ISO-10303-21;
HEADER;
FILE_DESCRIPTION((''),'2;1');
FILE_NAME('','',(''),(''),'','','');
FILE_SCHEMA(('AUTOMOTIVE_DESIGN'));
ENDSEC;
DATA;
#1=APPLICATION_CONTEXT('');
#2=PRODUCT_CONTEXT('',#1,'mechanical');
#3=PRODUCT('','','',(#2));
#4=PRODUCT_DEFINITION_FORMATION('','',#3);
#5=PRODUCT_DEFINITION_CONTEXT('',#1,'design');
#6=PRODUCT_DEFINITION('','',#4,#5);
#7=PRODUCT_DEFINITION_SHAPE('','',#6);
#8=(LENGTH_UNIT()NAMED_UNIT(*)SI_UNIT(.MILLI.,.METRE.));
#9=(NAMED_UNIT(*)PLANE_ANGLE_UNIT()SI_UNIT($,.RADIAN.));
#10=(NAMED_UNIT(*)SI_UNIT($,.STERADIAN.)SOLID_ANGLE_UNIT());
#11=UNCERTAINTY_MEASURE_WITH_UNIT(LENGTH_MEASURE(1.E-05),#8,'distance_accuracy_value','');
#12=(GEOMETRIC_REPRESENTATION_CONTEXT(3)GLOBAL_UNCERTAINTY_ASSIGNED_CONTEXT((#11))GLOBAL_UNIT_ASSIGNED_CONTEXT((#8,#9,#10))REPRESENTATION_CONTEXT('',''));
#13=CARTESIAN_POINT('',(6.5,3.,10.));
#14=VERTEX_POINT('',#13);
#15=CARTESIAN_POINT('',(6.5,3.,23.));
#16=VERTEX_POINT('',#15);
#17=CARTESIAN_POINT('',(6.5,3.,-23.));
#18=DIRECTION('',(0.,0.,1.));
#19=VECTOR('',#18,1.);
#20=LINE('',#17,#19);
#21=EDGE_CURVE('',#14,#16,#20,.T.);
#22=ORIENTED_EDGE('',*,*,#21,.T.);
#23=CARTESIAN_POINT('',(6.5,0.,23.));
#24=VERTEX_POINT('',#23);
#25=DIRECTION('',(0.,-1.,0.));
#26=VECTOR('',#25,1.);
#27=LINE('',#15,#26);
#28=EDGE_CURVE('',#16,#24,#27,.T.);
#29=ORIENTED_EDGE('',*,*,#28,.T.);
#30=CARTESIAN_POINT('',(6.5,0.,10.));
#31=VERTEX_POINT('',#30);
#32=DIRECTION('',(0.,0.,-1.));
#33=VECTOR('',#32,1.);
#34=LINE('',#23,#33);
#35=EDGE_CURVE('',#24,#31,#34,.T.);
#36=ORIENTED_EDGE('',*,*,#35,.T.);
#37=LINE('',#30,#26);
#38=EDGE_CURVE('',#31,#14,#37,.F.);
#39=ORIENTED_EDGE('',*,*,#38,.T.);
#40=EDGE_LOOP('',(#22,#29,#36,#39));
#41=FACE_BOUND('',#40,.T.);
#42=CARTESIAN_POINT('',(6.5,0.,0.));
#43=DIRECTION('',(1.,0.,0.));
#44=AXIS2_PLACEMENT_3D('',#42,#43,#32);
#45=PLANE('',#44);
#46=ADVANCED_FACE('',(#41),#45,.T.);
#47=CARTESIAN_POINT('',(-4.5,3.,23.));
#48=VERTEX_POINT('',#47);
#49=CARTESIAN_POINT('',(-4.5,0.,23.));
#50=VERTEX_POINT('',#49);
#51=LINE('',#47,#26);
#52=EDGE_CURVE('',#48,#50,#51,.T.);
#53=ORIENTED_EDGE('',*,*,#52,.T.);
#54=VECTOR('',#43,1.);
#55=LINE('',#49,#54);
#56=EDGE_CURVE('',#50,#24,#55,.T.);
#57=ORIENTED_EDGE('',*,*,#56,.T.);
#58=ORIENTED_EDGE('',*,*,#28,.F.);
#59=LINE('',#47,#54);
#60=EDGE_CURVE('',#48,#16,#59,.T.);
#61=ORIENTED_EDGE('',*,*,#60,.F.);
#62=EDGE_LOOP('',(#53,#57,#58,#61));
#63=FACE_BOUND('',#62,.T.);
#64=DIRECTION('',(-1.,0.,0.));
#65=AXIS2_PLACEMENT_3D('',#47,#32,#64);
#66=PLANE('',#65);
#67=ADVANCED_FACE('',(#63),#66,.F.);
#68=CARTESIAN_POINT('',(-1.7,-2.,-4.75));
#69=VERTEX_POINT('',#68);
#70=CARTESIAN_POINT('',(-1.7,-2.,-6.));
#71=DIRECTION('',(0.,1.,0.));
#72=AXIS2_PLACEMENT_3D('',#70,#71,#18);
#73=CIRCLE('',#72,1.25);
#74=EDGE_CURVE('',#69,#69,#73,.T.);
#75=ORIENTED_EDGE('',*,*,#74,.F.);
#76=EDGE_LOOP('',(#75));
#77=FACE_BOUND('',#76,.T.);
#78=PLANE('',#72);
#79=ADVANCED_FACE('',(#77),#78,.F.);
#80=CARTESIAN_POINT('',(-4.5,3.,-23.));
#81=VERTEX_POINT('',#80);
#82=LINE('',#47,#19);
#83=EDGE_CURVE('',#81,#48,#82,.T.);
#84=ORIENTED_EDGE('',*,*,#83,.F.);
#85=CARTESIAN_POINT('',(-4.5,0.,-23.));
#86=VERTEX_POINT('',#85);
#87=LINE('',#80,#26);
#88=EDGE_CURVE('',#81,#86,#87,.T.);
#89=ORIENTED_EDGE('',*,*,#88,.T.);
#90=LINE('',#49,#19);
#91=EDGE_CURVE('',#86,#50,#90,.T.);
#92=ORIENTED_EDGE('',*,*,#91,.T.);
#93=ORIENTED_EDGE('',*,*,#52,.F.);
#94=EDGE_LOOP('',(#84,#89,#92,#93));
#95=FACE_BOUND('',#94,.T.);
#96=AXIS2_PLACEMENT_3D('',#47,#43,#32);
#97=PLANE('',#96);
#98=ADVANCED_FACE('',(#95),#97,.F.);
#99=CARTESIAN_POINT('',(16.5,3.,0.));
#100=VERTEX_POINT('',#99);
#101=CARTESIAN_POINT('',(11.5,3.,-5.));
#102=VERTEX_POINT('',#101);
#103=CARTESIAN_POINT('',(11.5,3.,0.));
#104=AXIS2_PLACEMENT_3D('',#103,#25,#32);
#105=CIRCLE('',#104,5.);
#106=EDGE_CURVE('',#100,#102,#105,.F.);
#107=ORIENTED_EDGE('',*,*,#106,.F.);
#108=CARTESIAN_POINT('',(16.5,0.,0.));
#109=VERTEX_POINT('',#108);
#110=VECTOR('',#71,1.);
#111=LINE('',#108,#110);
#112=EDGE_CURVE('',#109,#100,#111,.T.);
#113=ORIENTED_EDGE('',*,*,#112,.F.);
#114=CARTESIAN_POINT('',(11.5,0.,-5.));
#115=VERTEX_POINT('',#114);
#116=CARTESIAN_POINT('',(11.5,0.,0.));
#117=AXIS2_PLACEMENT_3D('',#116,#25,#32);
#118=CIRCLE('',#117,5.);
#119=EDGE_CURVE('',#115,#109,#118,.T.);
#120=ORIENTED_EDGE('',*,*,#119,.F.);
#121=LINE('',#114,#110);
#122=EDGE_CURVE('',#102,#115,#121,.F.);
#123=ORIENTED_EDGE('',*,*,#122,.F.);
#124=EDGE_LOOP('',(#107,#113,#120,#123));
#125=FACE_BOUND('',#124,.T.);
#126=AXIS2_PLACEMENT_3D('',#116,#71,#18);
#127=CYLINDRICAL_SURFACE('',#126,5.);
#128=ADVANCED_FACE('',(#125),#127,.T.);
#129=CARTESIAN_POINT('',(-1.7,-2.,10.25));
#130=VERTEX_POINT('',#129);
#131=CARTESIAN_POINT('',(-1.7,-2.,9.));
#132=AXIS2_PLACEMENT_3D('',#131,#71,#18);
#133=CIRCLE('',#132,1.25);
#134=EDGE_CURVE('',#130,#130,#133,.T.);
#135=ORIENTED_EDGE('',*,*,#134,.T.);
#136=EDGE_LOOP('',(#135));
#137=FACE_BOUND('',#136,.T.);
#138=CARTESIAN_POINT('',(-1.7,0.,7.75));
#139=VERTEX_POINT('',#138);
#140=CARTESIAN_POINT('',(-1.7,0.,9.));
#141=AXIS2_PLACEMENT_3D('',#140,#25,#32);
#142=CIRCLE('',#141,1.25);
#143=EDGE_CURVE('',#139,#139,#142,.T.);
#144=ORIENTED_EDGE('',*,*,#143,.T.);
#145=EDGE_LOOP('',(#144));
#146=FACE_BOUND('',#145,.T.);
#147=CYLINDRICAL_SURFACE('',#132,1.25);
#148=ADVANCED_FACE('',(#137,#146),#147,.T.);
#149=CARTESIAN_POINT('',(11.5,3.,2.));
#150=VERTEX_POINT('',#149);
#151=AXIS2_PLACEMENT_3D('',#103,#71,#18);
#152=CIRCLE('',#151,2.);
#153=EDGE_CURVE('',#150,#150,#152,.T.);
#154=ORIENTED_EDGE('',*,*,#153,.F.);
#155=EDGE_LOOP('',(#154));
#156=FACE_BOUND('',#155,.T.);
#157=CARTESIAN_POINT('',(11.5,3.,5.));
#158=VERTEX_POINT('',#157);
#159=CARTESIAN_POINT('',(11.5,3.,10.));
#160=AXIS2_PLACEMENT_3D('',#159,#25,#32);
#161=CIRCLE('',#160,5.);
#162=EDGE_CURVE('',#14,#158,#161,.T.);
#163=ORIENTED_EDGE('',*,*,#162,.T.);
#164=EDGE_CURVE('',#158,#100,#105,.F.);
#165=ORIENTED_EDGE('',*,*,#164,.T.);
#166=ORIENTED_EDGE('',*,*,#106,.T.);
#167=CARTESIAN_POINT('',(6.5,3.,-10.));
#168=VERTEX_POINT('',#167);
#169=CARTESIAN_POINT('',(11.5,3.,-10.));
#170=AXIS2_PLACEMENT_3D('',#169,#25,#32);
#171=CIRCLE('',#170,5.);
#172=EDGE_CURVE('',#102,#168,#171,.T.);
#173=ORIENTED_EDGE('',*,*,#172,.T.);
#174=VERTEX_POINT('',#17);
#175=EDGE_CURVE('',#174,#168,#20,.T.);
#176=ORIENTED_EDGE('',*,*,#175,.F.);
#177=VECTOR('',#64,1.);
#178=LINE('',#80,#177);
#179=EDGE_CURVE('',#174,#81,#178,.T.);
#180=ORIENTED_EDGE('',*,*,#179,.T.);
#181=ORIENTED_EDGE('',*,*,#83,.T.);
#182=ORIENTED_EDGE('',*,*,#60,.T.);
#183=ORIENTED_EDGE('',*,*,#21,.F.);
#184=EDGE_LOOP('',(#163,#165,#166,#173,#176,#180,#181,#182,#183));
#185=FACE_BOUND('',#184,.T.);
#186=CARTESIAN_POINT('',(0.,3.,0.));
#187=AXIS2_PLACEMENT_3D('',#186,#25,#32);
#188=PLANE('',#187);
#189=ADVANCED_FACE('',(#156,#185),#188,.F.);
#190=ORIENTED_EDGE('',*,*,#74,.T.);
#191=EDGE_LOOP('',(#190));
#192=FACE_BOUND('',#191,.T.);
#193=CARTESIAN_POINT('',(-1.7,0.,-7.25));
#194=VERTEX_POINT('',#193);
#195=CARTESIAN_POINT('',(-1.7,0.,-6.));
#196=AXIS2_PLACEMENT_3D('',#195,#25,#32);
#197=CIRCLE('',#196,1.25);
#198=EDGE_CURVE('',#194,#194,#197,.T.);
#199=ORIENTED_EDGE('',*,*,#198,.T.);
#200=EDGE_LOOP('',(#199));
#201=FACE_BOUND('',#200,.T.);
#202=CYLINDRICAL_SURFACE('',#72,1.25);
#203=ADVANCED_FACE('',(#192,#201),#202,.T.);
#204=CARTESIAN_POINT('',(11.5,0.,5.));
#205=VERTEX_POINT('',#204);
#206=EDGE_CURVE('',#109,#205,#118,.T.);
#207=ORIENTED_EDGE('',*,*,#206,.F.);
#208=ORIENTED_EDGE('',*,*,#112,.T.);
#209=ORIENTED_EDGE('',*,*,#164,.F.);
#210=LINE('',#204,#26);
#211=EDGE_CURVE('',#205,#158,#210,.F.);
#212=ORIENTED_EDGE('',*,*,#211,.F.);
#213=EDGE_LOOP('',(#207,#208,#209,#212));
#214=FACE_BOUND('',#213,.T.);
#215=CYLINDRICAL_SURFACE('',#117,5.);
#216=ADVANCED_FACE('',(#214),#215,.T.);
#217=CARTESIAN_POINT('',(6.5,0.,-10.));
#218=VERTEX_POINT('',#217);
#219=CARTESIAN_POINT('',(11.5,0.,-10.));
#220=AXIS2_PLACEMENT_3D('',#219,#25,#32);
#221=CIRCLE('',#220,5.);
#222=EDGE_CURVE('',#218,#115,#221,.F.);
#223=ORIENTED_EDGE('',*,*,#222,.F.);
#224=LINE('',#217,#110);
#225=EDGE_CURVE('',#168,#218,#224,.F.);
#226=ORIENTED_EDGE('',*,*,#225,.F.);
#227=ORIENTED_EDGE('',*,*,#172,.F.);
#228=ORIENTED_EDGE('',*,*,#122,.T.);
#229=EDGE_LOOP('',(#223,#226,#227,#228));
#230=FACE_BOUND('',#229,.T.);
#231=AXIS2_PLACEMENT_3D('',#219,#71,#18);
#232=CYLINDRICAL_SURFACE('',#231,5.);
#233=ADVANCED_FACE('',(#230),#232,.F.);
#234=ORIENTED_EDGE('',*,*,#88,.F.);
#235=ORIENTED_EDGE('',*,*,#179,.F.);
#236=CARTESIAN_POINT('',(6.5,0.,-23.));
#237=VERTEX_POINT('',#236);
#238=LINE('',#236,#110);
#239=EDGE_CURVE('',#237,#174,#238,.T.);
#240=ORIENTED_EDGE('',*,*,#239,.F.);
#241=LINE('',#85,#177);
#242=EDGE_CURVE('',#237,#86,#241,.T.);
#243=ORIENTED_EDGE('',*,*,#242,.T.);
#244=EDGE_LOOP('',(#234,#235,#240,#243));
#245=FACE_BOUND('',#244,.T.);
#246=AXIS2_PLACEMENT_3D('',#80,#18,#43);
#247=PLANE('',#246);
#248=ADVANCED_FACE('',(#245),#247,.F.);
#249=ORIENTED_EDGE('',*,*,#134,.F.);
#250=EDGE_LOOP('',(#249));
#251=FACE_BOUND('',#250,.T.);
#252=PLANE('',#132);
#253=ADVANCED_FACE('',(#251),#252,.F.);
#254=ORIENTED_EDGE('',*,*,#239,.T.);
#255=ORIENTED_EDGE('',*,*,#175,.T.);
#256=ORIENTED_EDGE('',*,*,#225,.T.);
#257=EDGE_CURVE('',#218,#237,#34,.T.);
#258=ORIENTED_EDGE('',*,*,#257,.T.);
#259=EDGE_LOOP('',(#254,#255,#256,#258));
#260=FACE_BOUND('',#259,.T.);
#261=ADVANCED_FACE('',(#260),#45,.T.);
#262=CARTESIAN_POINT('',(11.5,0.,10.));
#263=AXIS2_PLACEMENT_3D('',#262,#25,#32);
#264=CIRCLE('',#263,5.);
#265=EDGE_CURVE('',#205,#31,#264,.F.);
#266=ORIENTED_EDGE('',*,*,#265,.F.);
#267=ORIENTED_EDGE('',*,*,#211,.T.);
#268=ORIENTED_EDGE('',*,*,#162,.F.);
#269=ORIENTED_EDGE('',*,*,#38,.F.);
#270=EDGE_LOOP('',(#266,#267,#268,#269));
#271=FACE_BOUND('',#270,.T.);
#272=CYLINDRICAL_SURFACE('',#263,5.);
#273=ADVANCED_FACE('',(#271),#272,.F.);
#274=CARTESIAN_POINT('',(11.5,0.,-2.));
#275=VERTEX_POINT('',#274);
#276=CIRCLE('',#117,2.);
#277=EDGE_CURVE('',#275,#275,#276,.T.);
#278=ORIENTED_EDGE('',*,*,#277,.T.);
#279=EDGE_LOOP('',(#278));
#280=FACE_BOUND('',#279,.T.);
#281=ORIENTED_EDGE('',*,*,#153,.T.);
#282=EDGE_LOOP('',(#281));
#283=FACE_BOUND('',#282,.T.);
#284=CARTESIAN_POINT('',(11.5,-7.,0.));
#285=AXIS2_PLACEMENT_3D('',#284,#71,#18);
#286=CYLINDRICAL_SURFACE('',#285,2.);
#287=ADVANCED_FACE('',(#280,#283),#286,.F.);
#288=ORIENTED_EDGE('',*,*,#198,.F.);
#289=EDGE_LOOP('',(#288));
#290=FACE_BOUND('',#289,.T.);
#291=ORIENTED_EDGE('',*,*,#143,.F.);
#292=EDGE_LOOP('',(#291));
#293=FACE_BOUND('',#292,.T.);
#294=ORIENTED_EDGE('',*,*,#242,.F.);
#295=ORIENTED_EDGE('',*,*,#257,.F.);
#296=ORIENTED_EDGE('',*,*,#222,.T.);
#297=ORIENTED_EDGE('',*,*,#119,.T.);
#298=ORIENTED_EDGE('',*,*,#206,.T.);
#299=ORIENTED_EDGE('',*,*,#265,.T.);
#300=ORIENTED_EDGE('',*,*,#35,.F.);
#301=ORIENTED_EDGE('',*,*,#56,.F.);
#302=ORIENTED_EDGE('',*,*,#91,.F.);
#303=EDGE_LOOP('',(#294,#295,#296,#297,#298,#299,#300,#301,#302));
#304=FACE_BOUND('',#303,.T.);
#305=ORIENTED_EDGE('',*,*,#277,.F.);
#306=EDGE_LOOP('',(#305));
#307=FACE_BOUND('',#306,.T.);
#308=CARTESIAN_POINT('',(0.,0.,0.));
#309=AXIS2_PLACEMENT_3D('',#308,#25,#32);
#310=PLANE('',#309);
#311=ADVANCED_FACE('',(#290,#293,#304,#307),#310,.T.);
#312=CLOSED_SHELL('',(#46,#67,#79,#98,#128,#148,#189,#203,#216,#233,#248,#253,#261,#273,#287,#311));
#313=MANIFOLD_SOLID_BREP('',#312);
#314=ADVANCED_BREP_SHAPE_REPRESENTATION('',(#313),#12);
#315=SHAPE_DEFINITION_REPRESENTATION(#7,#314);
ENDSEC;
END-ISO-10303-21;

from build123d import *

# Parameters (mm, degrees)
SKETCH1_W           = 9
SKETCH1_H           = 46
BOSS_EXTRUDE1_DEPTH = 3
SKETCH2_R           = 1.25
BOSS_EXTRUDE2_DEPTH = 5
SKETCH3_W           = 46
SKETCH3_H           = 3
BOSS_EXTRUDE3_DEPTH = 2
SKETCH4_W           = 10
SKETCH4_H           = 3
BOSS_EXTRUDE4_DEPTH = 10
SKETCH5_R           = 2
CUT_EXTRUDE1_DEPTH  = 10
FILLET1_R           = 5
FILLET2_R           = 5


with BuildPart() as part:
    # Sketch1 → Boss-Extrude1 (new body)
    with BuildSketch(Plane(origin=(0, 0, 0), x_dir=(1, 0, 0), z_dir=(0, 1, 0))):
        Rectangle(SKETCH1_W, SKETCH1_H)
    extrude(amount=BOSS_EXTRUDE1_DEPTH)

    # Sketch2 → Boss-Extrude2 (add)
    with BuildSketch(Plane(origin=(0, 3, 0), x_dir=(1, 0, 0), z_dir=(0, 1, 0))):
        with Locations(Location((-1.7, -9, 0), (0, 0, 270))):
            Circle(SKETCH2_R)
        with Locations(Location((-1.7, 6, 0), (0, 0, 270))):
            Circle(SKETCH2_R)
    extrude(amount=-BOSS_EXTRUDE2_DEPTH)

    # Sketch3 → Boss-Extrude3 (add)
    with BuildSketch(Plane(origin=(4.5, 0, 0), x_dir=(0, 0, -1), z_dir=(1, 0, 0))):
        with Locations((0, 1.5)):
            Rectangle(SKETCH3_W, SKETCH3_H)
    extrude(amount=BOSS_EXTRUDE3_DEPTH)

    # Sketch4 → Boss-Extrude4 (add)
    with BuildSketch(Plane(origin=(6.5, 0, 0), x_dir=(0, 0, -1), z_dir=(1, 0, 0))):
        with Locations((0, 1.5)):
            Rectangle(SKETCH4_W, SKETCH4_H)
    extrude(amount=BOSS_EXTRUDE4_DEPTH)

    # Sketch5 → Cut-Extrude1 (cut)
    with BuildSketch(Plane(origin=(0, 3, 0), x_dir=(1, 0, 0), z_dir=(0, 1, 0))):
        with Locations(Location((11.5, 0, 0), (0, 0, 270))):
            Circle(SKETCH5_R)
    extrude(amount=-CUT_EXTRUDE1_DEPTH, mode=Mode.SUBTRACT)

    # Fillet1
    fillet1_edges = [part.edges().sort_by_distance(p)[0] for p in [
        (16.5, 1.5, 5),
        (16.5, 1.5, -5),
    ]]
    fillet(fillet1_edges, radius=FILLET1_R - 0.0001)  # a hair under: the kernel refuses the full size

    # Fillet2
    fillet2_edges = [part.edges().sort_by_distance(p)[0] for p in [
        (6.5, 1.5, -5),
        (6.5, 1.5, 5),
    ]]
    fillet(fillet2_edges, radius=FILLET2_R)


solid = part.part
